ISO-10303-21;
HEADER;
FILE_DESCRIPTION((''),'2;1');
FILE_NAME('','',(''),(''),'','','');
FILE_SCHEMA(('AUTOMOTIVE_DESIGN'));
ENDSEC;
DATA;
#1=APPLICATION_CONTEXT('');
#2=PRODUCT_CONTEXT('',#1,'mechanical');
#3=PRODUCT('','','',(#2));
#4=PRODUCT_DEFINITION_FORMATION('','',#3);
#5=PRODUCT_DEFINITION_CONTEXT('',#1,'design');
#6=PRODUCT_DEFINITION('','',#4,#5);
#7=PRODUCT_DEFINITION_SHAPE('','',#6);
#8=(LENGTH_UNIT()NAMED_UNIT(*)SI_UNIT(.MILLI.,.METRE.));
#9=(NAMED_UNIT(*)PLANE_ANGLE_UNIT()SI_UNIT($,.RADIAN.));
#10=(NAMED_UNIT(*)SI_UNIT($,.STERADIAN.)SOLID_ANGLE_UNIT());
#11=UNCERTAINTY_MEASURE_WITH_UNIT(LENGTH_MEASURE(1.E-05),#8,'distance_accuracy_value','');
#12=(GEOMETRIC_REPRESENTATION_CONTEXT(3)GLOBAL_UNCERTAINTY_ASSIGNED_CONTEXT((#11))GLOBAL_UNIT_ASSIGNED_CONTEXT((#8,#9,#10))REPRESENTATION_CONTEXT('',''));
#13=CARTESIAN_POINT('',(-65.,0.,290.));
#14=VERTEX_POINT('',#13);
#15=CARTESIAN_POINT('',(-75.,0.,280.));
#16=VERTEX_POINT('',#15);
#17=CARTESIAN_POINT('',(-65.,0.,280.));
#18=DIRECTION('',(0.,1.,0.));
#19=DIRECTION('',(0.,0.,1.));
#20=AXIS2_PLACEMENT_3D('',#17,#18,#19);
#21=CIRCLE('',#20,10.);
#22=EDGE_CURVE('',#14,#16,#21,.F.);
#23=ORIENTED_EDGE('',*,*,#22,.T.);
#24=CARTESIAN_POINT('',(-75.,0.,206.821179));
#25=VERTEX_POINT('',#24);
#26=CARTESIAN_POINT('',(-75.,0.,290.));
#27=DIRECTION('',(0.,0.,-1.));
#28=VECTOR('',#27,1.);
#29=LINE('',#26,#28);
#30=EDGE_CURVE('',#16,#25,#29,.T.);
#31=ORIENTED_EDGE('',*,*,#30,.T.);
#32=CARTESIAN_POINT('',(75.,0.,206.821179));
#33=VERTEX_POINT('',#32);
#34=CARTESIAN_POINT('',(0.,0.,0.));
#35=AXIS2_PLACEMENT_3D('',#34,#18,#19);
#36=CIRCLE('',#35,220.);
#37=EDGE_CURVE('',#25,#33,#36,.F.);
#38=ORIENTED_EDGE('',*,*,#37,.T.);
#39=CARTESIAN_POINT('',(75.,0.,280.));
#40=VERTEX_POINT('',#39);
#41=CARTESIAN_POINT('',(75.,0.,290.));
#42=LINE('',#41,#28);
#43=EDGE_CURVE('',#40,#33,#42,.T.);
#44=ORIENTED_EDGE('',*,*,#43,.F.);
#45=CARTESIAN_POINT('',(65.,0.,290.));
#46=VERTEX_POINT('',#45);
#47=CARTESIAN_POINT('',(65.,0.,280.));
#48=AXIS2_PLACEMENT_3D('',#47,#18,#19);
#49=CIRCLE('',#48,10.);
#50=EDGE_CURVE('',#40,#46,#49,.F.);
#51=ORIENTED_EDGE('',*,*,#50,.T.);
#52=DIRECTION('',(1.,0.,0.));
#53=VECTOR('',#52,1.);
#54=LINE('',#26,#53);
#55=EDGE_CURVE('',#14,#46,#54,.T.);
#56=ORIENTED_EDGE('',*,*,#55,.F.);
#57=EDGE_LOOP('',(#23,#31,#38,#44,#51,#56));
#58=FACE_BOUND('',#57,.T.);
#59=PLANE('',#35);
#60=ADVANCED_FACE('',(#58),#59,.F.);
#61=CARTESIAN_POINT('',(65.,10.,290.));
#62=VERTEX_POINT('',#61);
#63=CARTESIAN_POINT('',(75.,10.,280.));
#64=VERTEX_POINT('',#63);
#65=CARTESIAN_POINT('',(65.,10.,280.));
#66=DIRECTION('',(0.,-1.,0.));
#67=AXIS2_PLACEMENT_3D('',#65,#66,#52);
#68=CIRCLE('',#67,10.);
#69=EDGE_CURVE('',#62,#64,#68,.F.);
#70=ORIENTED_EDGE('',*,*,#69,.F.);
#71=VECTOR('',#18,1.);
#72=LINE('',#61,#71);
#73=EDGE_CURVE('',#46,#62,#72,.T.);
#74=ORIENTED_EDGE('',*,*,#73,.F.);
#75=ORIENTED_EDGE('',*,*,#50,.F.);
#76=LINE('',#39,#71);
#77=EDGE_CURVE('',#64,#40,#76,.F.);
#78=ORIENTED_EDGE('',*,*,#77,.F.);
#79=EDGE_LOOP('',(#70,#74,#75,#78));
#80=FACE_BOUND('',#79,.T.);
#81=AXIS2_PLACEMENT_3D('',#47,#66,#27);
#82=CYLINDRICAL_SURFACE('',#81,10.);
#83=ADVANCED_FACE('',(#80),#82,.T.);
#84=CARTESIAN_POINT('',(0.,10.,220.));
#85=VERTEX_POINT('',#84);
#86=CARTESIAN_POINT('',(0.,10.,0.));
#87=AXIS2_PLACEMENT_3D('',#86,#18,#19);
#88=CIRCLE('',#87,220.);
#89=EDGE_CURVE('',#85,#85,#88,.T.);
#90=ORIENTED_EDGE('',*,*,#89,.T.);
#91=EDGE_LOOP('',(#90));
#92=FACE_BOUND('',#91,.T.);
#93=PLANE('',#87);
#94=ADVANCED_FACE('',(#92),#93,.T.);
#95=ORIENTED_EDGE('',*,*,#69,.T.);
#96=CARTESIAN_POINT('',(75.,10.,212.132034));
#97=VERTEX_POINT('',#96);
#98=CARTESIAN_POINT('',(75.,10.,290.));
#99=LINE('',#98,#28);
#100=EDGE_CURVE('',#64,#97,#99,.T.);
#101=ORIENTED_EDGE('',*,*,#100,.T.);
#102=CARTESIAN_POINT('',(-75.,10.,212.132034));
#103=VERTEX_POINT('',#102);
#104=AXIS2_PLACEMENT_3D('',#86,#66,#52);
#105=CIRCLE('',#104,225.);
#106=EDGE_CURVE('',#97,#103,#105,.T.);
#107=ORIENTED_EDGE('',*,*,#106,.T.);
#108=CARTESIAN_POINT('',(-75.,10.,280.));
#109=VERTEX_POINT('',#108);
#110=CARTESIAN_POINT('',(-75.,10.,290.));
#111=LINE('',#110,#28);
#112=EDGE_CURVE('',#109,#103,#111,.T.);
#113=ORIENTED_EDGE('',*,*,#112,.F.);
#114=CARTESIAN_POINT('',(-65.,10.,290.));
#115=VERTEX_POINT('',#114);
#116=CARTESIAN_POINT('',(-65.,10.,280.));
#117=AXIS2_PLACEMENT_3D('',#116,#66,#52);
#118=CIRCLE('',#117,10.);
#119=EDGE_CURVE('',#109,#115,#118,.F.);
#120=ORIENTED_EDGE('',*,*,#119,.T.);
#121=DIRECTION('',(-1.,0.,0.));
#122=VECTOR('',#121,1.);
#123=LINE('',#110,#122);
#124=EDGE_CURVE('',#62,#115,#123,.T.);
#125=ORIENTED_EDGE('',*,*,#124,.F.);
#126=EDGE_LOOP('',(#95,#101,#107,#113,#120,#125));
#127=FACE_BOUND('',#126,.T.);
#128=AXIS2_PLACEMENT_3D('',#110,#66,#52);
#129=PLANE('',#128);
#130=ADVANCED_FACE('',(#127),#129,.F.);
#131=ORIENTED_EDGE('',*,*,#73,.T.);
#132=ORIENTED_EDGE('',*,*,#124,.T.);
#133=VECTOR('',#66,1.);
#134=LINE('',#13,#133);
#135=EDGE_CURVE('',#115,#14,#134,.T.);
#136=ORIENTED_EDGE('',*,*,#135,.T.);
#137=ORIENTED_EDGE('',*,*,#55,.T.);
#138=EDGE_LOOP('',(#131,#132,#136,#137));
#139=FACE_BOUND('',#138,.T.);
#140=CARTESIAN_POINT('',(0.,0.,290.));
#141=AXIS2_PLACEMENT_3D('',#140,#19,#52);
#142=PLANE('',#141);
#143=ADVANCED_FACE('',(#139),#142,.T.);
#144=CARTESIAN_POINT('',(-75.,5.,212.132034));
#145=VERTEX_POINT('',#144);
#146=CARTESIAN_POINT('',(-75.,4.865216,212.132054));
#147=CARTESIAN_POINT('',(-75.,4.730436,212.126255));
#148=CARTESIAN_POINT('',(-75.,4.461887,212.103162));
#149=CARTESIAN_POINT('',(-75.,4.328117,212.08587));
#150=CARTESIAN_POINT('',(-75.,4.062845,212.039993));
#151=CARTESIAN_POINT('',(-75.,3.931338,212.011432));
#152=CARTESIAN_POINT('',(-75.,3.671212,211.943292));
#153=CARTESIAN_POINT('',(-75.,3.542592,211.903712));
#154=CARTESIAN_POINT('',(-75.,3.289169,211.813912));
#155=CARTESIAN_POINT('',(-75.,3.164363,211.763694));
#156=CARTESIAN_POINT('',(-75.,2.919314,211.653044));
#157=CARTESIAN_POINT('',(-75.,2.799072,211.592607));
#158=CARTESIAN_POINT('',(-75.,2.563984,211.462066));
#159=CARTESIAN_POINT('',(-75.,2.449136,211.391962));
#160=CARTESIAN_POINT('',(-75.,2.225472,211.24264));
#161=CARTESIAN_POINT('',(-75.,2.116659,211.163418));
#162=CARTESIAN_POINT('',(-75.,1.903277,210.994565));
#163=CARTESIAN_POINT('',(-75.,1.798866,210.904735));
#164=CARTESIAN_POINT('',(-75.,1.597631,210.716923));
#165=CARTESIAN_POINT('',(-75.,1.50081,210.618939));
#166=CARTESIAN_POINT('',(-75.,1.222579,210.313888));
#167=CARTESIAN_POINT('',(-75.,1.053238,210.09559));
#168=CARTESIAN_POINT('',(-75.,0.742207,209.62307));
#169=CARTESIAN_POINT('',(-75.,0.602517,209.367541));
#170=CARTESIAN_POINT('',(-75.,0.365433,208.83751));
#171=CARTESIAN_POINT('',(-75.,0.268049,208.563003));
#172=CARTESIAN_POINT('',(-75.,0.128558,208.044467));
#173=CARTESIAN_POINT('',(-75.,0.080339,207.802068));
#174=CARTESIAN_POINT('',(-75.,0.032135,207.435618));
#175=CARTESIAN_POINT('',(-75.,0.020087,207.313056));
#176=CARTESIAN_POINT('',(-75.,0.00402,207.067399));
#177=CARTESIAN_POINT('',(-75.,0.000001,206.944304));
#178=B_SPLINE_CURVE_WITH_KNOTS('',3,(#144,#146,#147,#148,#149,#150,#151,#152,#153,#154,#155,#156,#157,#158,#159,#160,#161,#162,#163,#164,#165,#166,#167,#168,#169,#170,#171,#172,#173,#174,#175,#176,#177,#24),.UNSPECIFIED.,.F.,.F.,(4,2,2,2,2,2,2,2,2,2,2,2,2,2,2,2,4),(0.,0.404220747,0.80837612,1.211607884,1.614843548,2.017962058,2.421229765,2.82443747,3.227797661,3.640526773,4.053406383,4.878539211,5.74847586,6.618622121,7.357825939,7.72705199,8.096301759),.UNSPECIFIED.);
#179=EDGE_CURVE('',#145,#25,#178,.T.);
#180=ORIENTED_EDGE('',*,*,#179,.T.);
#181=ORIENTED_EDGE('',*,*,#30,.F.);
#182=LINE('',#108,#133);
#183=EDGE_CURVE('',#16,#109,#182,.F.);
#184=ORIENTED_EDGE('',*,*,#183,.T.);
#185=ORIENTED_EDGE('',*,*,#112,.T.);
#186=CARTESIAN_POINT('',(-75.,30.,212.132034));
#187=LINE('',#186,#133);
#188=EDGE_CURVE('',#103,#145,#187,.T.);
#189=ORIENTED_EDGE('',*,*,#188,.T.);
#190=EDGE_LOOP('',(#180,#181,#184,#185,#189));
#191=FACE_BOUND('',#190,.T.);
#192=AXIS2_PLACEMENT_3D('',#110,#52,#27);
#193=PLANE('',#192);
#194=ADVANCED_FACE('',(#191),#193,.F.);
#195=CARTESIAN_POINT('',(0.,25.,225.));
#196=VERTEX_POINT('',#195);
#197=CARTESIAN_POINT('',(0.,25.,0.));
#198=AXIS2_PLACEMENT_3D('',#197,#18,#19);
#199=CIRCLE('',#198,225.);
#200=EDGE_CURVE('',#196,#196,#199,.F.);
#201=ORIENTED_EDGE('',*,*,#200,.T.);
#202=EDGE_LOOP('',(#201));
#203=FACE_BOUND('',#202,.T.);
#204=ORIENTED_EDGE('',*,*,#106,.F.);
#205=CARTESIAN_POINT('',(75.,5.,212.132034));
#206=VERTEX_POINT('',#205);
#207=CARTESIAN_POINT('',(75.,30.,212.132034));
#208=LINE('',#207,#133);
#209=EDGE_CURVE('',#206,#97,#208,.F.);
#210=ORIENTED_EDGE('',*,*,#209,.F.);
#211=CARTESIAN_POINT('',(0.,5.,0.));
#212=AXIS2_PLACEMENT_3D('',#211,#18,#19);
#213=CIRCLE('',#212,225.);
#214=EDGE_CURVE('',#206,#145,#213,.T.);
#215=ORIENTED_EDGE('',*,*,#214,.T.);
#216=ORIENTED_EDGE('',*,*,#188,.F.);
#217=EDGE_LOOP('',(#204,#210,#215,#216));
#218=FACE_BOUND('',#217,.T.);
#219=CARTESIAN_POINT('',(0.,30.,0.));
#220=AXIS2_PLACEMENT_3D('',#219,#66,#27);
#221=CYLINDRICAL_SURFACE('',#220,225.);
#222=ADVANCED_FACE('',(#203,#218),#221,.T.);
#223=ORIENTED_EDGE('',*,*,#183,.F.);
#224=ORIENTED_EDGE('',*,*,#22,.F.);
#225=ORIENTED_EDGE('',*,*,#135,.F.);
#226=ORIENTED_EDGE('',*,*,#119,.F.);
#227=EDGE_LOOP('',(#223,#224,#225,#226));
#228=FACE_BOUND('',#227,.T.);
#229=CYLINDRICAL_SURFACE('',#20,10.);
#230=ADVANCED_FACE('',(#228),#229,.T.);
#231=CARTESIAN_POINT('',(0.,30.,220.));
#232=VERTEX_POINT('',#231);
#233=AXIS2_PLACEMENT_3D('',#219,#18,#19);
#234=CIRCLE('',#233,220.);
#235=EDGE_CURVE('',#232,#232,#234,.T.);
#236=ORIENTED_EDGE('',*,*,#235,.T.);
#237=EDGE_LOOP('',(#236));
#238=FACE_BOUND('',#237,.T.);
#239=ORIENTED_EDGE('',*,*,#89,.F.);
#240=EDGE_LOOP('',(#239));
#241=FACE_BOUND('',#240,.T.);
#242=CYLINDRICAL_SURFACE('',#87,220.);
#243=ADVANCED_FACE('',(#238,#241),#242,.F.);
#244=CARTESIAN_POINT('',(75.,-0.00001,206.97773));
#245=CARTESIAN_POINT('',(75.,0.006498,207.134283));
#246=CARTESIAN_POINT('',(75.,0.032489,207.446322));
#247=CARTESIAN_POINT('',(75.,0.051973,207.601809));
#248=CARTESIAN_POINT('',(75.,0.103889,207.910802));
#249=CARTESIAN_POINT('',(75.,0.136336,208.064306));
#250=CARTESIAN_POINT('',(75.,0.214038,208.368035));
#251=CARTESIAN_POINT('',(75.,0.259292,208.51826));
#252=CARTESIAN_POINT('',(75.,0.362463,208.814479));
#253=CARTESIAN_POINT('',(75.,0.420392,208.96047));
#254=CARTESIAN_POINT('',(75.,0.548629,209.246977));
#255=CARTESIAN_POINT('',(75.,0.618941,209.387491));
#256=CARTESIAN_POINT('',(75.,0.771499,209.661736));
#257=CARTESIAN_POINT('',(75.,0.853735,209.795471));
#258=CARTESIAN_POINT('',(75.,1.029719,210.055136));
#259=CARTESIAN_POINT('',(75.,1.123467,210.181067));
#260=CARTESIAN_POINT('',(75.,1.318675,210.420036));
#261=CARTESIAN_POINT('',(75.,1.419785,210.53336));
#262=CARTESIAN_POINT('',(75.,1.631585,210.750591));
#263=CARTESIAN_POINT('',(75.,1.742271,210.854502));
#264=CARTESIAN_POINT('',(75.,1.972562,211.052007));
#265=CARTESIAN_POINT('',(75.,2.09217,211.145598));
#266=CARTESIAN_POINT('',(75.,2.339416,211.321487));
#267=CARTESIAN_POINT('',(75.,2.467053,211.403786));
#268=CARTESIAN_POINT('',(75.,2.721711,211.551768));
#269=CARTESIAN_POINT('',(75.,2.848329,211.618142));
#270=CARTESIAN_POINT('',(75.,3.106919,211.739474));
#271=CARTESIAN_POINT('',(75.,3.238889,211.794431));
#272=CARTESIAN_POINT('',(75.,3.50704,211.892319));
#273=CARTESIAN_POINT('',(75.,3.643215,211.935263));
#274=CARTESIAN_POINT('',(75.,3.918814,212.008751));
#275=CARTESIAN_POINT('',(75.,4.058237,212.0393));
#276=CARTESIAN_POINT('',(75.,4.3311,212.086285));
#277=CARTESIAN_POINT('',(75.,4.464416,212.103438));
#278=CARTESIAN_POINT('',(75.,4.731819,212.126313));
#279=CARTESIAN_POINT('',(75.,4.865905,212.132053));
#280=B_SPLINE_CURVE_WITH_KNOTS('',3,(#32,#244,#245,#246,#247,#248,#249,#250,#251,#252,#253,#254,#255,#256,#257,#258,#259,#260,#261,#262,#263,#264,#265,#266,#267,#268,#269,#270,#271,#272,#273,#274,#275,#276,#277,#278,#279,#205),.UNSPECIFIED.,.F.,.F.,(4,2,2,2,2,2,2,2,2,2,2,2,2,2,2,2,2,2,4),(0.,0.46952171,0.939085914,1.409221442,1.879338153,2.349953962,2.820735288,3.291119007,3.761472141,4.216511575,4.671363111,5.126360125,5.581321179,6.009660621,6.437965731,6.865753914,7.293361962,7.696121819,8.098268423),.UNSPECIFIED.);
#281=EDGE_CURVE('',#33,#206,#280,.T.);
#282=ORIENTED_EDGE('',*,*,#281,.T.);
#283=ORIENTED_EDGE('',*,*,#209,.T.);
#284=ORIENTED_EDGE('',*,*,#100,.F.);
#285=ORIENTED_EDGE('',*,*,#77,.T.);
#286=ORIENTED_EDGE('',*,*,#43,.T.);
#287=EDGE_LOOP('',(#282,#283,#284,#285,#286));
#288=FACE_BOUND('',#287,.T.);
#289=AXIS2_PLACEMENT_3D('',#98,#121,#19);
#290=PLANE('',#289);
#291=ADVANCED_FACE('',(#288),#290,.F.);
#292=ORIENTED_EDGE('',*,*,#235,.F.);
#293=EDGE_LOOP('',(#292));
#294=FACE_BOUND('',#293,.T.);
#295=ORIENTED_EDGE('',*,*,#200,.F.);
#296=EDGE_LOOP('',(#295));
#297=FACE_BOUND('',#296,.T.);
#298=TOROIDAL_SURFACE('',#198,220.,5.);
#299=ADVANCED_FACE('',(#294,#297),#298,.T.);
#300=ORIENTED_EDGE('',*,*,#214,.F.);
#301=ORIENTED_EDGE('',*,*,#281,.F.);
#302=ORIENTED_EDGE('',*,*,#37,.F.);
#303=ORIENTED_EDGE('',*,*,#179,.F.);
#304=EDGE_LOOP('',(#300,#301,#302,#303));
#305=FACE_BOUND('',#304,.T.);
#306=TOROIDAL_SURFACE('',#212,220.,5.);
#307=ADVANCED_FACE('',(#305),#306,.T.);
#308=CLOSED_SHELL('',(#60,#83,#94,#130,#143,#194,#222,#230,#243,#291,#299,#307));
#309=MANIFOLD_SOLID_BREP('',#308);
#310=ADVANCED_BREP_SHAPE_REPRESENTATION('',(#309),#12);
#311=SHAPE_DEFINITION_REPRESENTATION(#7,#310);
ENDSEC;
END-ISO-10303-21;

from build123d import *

# Parameters (mm, degrees)
SKETCH1_R           = 225
BOSS_EXTRUDE1_DEPTH = 30
SKETCH2_R           = 220
CUT_EXTRUDE1_DEPTH  = 20
SKETCH4_W           = 150
SKETCH4_H           = 10
BOSS_EXTRUDE3_DEPTH = 290
FILLET1_R           = 10
FILLET2_R           = 5


with BuildPart() as part:
    # Sketch1 → Boss-Extrude1 (new body)
    with BuildSketch(Plane(origin=(0, 0, 0), x_dir=(1, 0, 0), z_dir=(0, 1, 0))):
        with Locations(Location((0, 0, 0), (0, 0, 270))):
            Circle(SKETCH1_R)
    extrude(amount=BOSS_EXTRUDE1_DEPTH)

    # Sketch2 → Cut-Extrude1 (cut)
    with BuildSketch(Plane(origin=(0, 30, 0), x_dir=(1, 0, 0), z_dir=(0, 1, 0))):
        with Locations(Location((0, 0, 0), (0, 0, 270))):
            Circle(SKETCH2_R)
    extrude(amount=-CUT_EXTRUDE1_DEPTH, mode=Mode.SUBTRACT)

    # Sketch4 → Boss-Extrude3 (add)
    with BuildSketch(Plane.XY):
        with Locations((0, 5)):
            Rectangle(SKETCH4_W, SKETCH4_H)
    extrude(amount=BOSS_EXTRUDE3_DEPTH)

    # Fillet1
    fillet1_edges = [part.edges().sort_by_distance(p)[0] for p in [
        (75, 5, 290),
        (-75, 5, 290),
    ]]
    fillet(fillet1_edges, radius=FILLET1_R)

    # Fillet2
    fillet2_edges = [part.edges().sort_by_distance(p)[0] for p in [
        (0, 0, -225),
        (0, 30, -225),
    ]]
    fillet(fillet2_edges, radius=FILLET2_R - 0.0001)  # a hair under: the kernel refuses the full size


solid = part.part
